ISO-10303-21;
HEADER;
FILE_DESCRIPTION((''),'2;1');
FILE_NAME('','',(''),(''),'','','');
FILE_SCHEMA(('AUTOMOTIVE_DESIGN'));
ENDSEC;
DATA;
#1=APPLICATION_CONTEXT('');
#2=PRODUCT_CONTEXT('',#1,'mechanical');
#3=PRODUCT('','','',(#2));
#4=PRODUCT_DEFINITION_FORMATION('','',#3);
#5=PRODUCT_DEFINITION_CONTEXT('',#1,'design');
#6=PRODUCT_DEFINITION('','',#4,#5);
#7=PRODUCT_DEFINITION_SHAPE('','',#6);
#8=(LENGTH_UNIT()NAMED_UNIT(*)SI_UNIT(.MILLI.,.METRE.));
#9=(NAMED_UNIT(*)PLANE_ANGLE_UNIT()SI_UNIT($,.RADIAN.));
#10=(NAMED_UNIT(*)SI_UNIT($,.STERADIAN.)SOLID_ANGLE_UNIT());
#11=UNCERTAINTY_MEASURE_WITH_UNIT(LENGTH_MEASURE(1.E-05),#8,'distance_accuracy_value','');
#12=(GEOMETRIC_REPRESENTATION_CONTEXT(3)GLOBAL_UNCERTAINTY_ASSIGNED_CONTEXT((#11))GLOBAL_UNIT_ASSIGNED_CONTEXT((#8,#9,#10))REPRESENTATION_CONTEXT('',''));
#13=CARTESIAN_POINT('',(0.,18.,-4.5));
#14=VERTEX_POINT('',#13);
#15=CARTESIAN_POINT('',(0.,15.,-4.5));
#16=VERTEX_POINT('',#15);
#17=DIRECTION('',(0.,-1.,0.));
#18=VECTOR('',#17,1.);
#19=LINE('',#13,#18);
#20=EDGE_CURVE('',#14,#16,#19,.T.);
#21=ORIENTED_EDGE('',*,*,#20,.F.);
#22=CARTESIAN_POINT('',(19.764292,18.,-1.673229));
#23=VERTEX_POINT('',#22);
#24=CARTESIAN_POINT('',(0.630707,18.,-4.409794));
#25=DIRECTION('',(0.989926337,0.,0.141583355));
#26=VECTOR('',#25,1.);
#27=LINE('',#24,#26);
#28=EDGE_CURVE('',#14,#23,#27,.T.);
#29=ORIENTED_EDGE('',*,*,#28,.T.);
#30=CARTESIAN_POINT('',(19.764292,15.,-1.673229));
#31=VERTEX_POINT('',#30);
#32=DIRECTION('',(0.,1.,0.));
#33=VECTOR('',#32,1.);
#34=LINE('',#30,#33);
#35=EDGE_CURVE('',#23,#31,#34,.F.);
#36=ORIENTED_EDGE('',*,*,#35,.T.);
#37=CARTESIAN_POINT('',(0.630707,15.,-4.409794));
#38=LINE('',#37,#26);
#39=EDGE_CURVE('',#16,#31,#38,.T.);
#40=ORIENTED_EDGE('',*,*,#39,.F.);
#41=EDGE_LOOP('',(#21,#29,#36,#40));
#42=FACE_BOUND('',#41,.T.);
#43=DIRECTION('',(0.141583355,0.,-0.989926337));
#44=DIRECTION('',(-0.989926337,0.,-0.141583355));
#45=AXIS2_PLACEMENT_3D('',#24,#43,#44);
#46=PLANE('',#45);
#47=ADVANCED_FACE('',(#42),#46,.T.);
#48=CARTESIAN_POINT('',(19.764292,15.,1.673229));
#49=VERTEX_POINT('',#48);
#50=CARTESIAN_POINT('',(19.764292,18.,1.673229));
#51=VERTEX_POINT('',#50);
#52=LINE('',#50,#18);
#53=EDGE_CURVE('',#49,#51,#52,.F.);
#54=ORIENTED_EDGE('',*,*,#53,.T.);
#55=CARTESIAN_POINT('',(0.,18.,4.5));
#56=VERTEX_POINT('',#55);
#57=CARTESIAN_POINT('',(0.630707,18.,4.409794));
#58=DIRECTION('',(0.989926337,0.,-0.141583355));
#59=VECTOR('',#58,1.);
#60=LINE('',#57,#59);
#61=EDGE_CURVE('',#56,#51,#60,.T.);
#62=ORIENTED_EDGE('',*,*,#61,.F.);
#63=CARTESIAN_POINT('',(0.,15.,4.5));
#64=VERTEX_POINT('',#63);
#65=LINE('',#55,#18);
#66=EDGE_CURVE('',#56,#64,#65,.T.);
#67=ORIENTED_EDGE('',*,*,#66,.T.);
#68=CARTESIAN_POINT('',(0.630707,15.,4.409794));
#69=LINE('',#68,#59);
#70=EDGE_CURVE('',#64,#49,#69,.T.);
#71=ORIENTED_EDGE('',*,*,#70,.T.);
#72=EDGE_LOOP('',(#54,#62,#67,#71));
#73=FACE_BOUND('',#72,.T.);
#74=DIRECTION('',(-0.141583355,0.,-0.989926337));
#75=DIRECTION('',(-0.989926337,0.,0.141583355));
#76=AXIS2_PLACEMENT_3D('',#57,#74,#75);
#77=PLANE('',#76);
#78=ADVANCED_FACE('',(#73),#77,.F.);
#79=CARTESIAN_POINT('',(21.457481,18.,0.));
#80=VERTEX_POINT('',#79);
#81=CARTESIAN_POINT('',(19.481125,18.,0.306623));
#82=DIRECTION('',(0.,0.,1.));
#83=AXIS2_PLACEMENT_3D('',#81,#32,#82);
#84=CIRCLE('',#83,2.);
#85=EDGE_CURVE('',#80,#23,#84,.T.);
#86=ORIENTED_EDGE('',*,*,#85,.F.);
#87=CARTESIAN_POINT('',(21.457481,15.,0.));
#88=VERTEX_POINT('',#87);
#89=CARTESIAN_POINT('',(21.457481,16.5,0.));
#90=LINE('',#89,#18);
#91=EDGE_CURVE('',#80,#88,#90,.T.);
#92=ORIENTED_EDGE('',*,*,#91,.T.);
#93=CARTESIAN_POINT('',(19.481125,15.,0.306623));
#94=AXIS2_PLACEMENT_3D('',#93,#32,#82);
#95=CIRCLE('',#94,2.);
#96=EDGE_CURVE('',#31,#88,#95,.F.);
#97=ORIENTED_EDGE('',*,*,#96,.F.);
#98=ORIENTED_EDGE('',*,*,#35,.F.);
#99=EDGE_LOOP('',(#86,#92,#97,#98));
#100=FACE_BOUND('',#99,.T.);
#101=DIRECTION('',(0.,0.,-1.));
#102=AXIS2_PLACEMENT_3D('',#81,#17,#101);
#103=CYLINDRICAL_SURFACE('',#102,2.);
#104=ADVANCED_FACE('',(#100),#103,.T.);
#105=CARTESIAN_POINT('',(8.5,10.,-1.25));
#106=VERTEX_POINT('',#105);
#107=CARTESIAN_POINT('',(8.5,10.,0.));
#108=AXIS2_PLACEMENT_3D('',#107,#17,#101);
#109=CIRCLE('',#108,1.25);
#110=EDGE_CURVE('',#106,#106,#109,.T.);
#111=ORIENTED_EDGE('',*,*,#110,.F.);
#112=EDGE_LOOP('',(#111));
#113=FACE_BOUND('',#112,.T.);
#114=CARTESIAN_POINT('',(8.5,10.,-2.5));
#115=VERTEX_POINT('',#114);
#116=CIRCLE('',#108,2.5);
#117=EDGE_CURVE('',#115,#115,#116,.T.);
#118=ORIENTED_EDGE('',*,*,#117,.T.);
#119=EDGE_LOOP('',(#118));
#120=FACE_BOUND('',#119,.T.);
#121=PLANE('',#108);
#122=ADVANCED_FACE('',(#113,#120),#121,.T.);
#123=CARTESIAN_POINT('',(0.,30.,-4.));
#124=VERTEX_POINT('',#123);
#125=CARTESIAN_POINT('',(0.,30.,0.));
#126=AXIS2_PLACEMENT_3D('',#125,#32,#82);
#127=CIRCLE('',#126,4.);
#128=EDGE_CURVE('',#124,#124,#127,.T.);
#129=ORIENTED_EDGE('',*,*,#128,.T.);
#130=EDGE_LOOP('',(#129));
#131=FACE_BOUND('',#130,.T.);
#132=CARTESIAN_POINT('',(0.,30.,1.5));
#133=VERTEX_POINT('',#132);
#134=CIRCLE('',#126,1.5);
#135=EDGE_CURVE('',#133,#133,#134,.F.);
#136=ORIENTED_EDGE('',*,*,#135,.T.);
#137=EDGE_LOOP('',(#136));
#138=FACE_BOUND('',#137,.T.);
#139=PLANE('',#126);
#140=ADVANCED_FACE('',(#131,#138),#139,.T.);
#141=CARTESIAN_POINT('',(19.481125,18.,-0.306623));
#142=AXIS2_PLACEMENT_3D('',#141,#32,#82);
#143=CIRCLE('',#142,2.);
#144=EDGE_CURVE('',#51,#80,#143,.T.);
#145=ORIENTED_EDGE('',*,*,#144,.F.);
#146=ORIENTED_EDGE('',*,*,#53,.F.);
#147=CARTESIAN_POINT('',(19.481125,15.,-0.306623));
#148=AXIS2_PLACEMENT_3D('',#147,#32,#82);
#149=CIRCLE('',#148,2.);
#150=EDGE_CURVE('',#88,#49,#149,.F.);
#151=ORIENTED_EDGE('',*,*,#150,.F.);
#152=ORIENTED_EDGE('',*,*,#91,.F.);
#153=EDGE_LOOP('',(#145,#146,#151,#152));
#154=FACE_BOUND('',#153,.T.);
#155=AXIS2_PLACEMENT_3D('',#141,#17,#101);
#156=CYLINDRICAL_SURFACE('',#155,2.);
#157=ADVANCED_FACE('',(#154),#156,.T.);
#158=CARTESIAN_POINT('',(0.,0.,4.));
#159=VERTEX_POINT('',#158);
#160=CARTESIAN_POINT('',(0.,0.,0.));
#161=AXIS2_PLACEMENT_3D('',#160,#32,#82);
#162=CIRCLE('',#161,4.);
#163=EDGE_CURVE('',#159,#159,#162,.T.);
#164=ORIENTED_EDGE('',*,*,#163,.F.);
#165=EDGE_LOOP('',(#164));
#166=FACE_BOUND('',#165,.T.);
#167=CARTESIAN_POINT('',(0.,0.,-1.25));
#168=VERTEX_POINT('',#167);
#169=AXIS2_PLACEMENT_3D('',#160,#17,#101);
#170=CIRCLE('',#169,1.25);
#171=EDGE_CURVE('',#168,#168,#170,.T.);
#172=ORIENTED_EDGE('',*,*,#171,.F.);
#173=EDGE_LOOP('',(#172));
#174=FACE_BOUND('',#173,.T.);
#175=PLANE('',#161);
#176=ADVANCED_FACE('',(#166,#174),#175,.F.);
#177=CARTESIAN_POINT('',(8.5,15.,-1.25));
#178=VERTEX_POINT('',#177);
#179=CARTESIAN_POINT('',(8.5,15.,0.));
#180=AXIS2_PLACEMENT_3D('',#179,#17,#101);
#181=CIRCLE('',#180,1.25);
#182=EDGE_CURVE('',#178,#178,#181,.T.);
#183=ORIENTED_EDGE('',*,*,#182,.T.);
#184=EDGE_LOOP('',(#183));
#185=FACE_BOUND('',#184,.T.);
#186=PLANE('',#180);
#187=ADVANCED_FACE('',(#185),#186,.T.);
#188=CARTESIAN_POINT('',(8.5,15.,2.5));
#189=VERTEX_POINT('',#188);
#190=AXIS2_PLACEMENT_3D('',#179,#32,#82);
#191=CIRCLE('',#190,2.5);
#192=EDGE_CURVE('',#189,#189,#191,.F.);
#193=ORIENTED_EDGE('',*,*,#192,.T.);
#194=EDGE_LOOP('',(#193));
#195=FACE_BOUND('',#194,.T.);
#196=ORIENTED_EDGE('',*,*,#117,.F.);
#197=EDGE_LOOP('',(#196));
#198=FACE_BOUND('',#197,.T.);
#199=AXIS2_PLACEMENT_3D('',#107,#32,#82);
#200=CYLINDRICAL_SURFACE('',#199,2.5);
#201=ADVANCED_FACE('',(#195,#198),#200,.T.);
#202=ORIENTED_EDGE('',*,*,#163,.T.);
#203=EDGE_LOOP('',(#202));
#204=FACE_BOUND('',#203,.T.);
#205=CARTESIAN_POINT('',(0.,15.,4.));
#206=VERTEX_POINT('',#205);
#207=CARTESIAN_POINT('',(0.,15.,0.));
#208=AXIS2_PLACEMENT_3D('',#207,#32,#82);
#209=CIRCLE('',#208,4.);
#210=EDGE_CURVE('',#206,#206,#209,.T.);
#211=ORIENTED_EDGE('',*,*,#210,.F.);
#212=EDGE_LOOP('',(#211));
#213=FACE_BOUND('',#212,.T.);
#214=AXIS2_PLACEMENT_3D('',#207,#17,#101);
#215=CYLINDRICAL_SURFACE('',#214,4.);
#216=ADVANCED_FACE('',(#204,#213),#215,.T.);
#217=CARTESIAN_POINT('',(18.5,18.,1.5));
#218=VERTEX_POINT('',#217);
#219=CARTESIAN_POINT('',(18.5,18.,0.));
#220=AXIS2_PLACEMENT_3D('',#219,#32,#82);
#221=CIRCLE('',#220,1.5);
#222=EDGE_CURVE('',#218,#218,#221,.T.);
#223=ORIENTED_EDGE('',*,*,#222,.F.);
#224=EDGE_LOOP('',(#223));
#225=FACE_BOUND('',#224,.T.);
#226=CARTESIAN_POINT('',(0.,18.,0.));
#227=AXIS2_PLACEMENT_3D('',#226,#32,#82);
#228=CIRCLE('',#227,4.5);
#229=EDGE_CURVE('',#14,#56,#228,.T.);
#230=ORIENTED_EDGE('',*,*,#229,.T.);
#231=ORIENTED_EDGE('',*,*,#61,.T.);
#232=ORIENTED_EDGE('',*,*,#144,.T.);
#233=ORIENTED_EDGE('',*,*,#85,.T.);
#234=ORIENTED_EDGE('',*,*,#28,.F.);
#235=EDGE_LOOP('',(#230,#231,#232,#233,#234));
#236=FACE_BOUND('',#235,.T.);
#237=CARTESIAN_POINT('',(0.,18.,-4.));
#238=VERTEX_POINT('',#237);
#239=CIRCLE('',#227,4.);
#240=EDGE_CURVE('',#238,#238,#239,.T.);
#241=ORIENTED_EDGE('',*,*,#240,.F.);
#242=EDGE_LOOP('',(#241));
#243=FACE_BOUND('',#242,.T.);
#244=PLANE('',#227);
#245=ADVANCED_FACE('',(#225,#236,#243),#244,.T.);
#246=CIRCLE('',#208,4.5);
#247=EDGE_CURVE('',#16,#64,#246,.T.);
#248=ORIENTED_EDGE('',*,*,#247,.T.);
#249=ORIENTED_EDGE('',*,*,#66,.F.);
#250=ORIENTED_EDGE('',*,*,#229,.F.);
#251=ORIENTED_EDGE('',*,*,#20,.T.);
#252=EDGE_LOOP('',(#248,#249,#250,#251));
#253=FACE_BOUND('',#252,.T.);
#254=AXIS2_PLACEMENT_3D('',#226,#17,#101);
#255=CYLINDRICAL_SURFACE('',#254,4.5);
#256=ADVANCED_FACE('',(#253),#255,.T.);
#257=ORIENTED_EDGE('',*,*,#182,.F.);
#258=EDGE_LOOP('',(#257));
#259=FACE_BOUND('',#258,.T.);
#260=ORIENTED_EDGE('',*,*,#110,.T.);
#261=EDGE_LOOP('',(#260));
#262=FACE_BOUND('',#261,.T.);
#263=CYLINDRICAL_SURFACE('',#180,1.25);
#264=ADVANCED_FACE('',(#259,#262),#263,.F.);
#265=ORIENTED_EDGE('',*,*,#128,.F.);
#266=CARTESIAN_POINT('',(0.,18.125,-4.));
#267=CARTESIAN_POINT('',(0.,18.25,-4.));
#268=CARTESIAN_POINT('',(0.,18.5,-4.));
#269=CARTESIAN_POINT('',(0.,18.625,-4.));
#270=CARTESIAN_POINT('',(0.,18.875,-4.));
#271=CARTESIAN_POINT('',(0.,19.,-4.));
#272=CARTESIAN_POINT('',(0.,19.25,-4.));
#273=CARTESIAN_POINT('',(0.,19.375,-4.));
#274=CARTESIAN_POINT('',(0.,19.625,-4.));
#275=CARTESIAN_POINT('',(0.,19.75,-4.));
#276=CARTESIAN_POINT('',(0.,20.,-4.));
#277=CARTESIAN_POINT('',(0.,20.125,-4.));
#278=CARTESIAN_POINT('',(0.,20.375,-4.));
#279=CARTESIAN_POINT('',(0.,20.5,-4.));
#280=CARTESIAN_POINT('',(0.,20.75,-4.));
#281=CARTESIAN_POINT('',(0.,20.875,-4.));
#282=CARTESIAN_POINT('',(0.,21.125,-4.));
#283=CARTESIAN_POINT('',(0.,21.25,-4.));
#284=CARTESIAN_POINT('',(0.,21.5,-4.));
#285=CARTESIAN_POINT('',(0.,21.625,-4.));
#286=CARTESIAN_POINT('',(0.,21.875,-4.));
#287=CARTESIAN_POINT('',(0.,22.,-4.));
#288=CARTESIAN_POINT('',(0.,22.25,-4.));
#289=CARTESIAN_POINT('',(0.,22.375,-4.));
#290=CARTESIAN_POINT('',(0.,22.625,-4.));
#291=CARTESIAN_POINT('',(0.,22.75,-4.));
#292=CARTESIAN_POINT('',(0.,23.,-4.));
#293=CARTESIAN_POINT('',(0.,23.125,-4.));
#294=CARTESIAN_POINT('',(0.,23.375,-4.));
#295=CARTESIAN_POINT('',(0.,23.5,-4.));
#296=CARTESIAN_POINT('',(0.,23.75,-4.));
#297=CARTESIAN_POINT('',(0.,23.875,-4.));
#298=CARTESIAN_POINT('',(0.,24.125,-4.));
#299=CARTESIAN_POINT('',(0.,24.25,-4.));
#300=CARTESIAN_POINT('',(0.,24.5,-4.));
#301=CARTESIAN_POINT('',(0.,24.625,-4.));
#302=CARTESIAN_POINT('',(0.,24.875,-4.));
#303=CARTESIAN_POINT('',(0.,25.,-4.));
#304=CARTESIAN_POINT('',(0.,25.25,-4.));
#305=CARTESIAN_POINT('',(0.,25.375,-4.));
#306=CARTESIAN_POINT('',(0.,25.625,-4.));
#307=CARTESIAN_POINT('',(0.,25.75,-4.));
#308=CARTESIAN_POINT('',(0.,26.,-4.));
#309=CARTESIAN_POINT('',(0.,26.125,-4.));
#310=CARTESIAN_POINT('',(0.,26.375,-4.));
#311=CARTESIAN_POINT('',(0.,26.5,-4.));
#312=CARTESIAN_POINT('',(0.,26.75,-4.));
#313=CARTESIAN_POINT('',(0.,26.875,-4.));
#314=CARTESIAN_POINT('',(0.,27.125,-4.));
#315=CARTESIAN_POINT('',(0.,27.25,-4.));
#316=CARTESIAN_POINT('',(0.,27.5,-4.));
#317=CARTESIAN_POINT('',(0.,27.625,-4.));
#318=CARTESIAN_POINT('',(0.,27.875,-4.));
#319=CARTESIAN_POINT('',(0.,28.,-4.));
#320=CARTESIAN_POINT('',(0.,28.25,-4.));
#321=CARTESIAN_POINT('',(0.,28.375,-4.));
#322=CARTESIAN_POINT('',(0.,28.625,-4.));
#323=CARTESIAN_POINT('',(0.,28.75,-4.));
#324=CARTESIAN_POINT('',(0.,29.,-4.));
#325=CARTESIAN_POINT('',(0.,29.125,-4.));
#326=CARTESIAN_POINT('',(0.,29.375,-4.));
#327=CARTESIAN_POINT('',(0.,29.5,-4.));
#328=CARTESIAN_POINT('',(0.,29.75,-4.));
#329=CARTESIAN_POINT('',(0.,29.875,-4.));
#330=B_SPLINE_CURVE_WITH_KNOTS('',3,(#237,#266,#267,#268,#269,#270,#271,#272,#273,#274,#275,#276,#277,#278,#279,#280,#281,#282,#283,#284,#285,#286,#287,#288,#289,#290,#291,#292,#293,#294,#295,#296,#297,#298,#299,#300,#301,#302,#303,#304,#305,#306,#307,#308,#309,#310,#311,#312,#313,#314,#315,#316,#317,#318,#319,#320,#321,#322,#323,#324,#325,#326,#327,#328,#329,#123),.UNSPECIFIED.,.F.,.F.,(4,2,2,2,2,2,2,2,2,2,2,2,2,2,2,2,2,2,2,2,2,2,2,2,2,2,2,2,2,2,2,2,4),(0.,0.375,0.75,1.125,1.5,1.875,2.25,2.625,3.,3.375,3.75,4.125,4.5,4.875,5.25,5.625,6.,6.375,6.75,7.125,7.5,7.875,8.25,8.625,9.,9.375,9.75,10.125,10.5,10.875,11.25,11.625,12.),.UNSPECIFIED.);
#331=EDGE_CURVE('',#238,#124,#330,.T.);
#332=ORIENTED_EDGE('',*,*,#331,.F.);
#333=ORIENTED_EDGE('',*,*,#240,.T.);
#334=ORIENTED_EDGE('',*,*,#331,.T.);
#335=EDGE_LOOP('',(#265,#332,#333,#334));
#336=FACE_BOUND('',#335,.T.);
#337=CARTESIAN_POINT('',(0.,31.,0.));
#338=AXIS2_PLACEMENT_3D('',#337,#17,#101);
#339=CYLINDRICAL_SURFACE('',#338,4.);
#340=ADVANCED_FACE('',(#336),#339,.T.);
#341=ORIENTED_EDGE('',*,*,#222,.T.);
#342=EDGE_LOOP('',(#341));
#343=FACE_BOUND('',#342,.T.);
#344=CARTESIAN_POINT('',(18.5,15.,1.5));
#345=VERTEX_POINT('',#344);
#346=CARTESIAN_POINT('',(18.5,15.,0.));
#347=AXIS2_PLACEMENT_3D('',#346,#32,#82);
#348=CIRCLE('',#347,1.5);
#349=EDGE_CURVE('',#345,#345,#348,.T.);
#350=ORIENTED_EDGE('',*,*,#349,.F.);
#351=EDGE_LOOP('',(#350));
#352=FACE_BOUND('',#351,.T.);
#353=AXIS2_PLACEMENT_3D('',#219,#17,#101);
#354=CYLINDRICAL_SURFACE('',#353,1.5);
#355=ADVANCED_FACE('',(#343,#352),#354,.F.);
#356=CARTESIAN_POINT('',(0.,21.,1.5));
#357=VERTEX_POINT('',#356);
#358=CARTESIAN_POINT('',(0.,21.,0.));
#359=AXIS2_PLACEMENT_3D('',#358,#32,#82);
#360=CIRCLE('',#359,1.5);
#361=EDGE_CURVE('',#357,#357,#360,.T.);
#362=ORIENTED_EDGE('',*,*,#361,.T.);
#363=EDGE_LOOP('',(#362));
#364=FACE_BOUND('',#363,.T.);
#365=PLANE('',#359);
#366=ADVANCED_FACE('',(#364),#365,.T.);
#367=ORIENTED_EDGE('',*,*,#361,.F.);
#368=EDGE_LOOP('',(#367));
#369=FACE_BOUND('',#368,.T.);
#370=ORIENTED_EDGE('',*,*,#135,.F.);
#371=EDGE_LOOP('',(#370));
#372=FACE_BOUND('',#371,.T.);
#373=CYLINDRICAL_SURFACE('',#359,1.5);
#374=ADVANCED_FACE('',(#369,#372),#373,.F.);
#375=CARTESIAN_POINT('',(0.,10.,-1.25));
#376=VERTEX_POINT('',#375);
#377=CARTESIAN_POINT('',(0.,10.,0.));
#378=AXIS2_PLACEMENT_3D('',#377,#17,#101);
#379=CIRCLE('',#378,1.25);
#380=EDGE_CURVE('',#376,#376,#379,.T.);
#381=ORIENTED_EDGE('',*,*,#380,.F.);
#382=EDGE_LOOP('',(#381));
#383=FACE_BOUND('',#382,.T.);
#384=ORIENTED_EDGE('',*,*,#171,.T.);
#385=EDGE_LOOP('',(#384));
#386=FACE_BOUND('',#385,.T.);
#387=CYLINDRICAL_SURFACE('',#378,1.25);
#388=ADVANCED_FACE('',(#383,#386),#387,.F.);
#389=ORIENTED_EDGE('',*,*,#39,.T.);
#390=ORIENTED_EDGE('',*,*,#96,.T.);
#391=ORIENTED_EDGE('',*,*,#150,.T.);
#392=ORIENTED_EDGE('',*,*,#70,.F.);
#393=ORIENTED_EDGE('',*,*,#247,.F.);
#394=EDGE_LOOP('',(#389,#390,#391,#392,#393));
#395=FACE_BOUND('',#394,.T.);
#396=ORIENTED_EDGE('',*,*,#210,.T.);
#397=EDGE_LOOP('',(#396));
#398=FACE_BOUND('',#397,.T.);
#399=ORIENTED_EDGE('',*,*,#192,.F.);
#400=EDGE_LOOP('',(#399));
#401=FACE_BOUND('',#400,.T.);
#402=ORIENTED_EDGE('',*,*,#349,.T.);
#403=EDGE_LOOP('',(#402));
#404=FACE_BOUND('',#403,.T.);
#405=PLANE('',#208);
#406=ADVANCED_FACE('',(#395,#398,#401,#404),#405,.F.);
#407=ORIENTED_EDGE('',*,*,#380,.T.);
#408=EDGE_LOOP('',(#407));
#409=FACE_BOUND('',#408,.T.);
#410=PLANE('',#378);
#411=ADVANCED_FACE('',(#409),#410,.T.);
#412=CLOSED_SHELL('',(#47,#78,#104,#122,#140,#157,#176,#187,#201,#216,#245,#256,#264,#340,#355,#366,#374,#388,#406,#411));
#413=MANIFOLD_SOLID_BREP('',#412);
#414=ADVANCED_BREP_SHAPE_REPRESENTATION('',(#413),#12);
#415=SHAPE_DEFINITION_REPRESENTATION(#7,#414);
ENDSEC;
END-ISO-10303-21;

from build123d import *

# Parameters (mm, degrees)
SKETCH1_R           = 4
BOSS_EXTRUDE1_DEPTH = 15
SKETCH2_R           = 1.5
BOSS_EXTRUDE4_DEPTH = 3
FILLET4_R           = 2
SKETCH7_R           = 4
BOSS_EXTRUDE5_DEPTH = 13
SKETCH8_R           = 1.5
CUT_EXTRUDE6_DEPTH  = 10
SKETCH10_R          = 1.25
CUT_EXTRUDE7_DEPTH  = 10
SKETCH11_R          = 2.5
BOSS_EXTRUDE6_DEPTH = 5
SKETCH12_R          = 1.25
CUT_EXTRUDE8_DEPTH  = 5
CUT_EXTRUDE10_START = -1
SKETCH14_R          = 4
CUT_EXTRUDE10_DEPTH = 1


with BuildPart() as part:
    # Sketch1 → Boss-Extrude1 (new body)
    with BuildSketch(Plane(origin=(0, 0, 0), x_dir=(1, 0, 0), z_dir=(0, 1, 0))):
        with Locations(Location((0, 0, 0), (0, 0, 270))):
            Circle(SKETCH1_R)
    extrude(amount=BOSS_EXTRUDE1_DEPTH)

    # Sketch2 → Boss-Extrude4 (add)
    with BuildSketch(Plane(origin=(0, 15, 0), x_dir=(1, 0, 0), z_dir=(0, 1, 0))):
        with BuildLine():
            Line((21.256644483, 1.459786884), (0, 4.5))
            ThreePointArc((0, 4.5), (-4.5, 0), (0, -4.5))
            Line((0, -4.5), (21.256644483, -1.459786884))
            ThreePointArc((21.256644483, -1.459786884), (21.5, 0), (21.256644483, 1.459786884))
        make_face()
        with Locations(Location((18.5, 0, 0), (0, 0, 270))):
            Circle(SKETCH2_R, mode=Mode.SUBTRACT)
    extrude(amount=BOSS_EXTRUDE4_DEPTH)

    # Fillet4
    # the kernel refuses this fillet: 2 mm, written as the material it takes off along each edge
    with BuildSketch(Plane(origin=(21.256644483, 9.943560337, -1.459786884), x_dir=(0.10352186513244716, 0, 0.9946271781122308), z_dir=(0, 1, 0))) as fillet4_piece_1:
        with BuildLine():
            CenterArc((1.573114562, -1.948841845), FILLET4_R, 77.012959975, 88.905549933)
            Line((-0.366786771, -1.462238498), (0, 0))
            ThreePointArc((0, 0), (1.011287933, 0.115105849), (2.022575865, 0))
        make_face()
    extrude(amount=13.112879326, mode=Mode.SUBTRACT)
    with BuildSketch(Plane(origin=(21.256644483, 9.943560337, 1.459786884), x_dir=(-0.9899263374983104, 0, 0.14158335469673372), z_dir=(0, 1, 0))) as fillet4_piece_2:
        with BuildLine():
            CenterArc((1.507539041, -2), FILLET4_R, 90, 88.905549933)
            ThreePointArc((-0.492096093, -1.961798809), (-0.357695041, -0.952893959), (0, 0))
            Line((0, 0), (1.507539041, 0))
        make_face()
    extrude(amount=13.112879326, mode=Mode.SUBTRACT)

    # Sketch7 → Boss-Extrude5 (add)
    with BuildSketch(Plane(origin=(0, 18, 0), x_dir=(1, 0, 0), z_dir=(0, 1, 0))):
        with Locations(Location((0, 0, 0), (0, 0, 270))):
            Circle(SKETCH7_R)
    extrude(amount=BOSS_EXTRUDE5_DEPTH)

    # Sketch8 → Cut-Extrude6 (cut)
    with BuildSketch(Plane(origin=(0, 31, 0), x_dir=(1, 0, 0), z_dir=(0, 1, 0))):
        with Locations(Location((0, 0, 0), (0, 0, 270))):
            Circle(SKETCH8_R)
    extrude(amount=-CUT_EXTRUDE6_DEPTH, mode=Mode.SUBTRACT)

    # Sketch10 → Cut-Extrude7 (cut)
    with BuildSketch(Plane.XZ):
        with Locations(Location((0, 0, 0), (0, 0, 270))):
            Circle(SKETCH10_R)
    extrude(amount=-CUT_EXTRUDE7_DEPTH, mode=Mode.SUBTRACT)

    # Sketch11 → Boss-Extrude6 (add)
    with BuildSketch(Plane.XZ.offset(-15)):
        with Locations(Location((8.5, 0, 0), (0, 0, 90))):
            Circle(SKETCH11_R)
    extrude(amount=BOSS_EXTRUDE6_DEPTH)

    # Sketch12 → Cut-Extrude8 (cut)
    with BuildSketch(Plane.XZ.offset(-10)):
        with Locations(Location((8.5, 0, 0), (0, 0, 270))):
            Circle(SKETCH12_R)
    extrude(amount=-CUT_EXTRUDE8_DEPTH, mode=Mode.SUBTRACT)

    # Sketch14 → Cut-Extrude10 (cut)
    with BuildSketch(Plane(origin=(0, 31, 0), x_dir=(1, 0, 0), z_dir=(0, 1, 0)).offset(CUT_EXTRUDE10_START)):
        with Locations(Location((0, 0, 0), (0, 0, 90))):
            Circle(SKETCH14_R)
    extrude(amount=CUT_EXTRUDE10_DEPTH, mode=Mode.SUBTRACT)


solid = part.part
